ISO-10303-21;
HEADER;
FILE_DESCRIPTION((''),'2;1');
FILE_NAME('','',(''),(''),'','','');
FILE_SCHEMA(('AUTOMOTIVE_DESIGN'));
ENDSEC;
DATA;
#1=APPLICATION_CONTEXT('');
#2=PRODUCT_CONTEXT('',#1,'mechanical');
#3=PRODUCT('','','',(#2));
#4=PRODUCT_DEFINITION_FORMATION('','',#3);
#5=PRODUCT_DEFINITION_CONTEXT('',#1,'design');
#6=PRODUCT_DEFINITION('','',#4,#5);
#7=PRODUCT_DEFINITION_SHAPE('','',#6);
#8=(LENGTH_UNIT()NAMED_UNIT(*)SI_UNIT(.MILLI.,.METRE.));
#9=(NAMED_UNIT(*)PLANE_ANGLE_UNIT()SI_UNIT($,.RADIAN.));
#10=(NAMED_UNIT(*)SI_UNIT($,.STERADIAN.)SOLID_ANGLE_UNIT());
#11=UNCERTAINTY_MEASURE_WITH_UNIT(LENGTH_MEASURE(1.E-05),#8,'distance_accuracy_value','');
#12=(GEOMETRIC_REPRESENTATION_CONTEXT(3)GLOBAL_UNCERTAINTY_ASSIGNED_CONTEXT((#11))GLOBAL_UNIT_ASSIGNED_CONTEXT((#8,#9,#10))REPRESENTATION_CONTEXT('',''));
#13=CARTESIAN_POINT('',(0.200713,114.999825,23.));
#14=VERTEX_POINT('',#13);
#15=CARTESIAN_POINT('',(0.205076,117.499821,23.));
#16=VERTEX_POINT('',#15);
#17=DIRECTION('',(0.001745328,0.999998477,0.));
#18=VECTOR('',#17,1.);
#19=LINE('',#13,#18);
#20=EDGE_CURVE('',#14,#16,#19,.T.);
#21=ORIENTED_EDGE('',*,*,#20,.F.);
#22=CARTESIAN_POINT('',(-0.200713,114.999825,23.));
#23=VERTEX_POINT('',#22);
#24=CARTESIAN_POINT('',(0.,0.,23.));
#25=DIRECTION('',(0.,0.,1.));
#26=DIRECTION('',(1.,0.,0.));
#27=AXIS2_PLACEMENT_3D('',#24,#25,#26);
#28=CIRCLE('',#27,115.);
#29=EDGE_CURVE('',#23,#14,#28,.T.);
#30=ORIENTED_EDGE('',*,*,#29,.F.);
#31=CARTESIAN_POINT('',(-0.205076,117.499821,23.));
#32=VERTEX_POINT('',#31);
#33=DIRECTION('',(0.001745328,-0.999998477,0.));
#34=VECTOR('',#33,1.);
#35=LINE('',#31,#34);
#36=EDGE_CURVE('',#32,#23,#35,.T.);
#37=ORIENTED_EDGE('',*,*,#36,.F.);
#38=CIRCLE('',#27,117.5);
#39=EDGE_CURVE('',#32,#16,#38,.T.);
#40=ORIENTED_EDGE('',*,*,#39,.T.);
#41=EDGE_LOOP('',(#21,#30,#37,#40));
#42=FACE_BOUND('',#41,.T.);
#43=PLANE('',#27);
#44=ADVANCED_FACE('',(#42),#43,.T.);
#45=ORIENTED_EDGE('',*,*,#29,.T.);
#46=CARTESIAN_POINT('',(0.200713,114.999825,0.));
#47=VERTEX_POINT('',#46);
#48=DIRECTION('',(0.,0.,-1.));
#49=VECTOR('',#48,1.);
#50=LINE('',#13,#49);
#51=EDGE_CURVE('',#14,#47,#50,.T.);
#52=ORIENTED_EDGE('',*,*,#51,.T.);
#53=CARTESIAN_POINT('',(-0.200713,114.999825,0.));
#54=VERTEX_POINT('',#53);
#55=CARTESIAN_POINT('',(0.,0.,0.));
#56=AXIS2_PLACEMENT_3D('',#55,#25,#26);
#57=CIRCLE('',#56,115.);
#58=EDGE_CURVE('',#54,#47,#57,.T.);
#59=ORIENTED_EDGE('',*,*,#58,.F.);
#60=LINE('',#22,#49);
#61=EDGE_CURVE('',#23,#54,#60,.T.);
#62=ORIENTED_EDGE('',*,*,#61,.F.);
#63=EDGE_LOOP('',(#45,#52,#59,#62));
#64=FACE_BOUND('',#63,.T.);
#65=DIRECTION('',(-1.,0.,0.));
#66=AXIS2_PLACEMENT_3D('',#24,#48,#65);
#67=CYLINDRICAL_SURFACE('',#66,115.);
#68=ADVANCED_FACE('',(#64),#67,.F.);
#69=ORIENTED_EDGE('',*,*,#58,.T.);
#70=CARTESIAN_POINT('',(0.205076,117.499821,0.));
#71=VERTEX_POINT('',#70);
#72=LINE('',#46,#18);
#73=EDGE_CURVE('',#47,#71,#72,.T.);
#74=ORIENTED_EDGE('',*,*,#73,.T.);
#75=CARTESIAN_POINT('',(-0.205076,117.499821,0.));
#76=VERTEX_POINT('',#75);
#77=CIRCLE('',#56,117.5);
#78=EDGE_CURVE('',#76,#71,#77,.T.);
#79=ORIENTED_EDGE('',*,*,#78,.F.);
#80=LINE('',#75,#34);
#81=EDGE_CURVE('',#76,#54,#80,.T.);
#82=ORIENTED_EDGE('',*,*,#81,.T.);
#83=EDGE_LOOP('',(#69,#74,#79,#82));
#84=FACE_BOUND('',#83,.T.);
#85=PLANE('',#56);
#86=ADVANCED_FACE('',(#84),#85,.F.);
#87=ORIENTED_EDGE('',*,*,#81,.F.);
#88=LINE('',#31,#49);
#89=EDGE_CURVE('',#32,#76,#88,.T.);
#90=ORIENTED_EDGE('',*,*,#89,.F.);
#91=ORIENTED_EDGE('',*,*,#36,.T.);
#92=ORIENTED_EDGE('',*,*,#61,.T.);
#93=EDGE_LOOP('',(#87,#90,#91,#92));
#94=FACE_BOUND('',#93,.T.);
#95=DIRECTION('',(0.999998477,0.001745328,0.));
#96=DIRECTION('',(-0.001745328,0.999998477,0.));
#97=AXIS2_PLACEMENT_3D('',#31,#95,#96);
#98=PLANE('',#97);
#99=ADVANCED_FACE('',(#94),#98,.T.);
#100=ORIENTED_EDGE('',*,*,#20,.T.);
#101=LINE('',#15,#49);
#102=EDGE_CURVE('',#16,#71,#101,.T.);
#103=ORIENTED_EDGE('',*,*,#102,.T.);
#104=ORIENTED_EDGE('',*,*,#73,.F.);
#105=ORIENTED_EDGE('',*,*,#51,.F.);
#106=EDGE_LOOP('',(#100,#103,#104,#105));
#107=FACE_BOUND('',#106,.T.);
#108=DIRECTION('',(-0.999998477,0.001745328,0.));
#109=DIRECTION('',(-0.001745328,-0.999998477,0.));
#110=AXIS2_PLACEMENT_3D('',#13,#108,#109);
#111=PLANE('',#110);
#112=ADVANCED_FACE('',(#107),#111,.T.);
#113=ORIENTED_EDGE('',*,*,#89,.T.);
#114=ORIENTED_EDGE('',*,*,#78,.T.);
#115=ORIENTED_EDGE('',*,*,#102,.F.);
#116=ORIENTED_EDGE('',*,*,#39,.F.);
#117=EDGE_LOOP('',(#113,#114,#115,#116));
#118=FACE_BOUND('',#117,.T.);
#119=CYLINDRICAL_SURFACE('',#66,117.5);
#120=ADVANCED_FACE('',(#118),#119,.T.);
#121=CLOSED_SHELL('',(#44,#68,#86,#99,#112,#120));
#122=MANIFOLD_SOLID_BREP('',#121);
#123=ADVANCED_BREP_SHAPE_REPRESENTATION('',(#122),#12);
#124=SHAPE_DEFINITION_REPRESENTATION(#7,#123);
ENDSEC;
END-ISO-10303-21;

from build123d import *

# Parameters (mm, degrees)
BASE_FLANGE1_DEPTH = 23


# Sheet-metal steps are written as plain solids
with BuildPart() as part:
    # Sketch1 → Base-Flange1 (new body)
    with BuildSketch(Plane.XY):
        with BuildLine():
            ThreePointArc((-0.200712762, 114.999824845), (0, -115), (0.200712762, 114.999824845))
            Line((0.200712762, 114.999824845), (0.205076083, 117.499821037))
            ThreePointArc((0.205076083, 117.499821037), (0, -117.5), (-0.205076083, 117.499821037))
            Line((-0.205076083, 117.499821037), (-0.200712762, 114.999824845))
        make_face()
    extrude(amount=BASE_FLANGE1_DEPTH)


solid = part.part
